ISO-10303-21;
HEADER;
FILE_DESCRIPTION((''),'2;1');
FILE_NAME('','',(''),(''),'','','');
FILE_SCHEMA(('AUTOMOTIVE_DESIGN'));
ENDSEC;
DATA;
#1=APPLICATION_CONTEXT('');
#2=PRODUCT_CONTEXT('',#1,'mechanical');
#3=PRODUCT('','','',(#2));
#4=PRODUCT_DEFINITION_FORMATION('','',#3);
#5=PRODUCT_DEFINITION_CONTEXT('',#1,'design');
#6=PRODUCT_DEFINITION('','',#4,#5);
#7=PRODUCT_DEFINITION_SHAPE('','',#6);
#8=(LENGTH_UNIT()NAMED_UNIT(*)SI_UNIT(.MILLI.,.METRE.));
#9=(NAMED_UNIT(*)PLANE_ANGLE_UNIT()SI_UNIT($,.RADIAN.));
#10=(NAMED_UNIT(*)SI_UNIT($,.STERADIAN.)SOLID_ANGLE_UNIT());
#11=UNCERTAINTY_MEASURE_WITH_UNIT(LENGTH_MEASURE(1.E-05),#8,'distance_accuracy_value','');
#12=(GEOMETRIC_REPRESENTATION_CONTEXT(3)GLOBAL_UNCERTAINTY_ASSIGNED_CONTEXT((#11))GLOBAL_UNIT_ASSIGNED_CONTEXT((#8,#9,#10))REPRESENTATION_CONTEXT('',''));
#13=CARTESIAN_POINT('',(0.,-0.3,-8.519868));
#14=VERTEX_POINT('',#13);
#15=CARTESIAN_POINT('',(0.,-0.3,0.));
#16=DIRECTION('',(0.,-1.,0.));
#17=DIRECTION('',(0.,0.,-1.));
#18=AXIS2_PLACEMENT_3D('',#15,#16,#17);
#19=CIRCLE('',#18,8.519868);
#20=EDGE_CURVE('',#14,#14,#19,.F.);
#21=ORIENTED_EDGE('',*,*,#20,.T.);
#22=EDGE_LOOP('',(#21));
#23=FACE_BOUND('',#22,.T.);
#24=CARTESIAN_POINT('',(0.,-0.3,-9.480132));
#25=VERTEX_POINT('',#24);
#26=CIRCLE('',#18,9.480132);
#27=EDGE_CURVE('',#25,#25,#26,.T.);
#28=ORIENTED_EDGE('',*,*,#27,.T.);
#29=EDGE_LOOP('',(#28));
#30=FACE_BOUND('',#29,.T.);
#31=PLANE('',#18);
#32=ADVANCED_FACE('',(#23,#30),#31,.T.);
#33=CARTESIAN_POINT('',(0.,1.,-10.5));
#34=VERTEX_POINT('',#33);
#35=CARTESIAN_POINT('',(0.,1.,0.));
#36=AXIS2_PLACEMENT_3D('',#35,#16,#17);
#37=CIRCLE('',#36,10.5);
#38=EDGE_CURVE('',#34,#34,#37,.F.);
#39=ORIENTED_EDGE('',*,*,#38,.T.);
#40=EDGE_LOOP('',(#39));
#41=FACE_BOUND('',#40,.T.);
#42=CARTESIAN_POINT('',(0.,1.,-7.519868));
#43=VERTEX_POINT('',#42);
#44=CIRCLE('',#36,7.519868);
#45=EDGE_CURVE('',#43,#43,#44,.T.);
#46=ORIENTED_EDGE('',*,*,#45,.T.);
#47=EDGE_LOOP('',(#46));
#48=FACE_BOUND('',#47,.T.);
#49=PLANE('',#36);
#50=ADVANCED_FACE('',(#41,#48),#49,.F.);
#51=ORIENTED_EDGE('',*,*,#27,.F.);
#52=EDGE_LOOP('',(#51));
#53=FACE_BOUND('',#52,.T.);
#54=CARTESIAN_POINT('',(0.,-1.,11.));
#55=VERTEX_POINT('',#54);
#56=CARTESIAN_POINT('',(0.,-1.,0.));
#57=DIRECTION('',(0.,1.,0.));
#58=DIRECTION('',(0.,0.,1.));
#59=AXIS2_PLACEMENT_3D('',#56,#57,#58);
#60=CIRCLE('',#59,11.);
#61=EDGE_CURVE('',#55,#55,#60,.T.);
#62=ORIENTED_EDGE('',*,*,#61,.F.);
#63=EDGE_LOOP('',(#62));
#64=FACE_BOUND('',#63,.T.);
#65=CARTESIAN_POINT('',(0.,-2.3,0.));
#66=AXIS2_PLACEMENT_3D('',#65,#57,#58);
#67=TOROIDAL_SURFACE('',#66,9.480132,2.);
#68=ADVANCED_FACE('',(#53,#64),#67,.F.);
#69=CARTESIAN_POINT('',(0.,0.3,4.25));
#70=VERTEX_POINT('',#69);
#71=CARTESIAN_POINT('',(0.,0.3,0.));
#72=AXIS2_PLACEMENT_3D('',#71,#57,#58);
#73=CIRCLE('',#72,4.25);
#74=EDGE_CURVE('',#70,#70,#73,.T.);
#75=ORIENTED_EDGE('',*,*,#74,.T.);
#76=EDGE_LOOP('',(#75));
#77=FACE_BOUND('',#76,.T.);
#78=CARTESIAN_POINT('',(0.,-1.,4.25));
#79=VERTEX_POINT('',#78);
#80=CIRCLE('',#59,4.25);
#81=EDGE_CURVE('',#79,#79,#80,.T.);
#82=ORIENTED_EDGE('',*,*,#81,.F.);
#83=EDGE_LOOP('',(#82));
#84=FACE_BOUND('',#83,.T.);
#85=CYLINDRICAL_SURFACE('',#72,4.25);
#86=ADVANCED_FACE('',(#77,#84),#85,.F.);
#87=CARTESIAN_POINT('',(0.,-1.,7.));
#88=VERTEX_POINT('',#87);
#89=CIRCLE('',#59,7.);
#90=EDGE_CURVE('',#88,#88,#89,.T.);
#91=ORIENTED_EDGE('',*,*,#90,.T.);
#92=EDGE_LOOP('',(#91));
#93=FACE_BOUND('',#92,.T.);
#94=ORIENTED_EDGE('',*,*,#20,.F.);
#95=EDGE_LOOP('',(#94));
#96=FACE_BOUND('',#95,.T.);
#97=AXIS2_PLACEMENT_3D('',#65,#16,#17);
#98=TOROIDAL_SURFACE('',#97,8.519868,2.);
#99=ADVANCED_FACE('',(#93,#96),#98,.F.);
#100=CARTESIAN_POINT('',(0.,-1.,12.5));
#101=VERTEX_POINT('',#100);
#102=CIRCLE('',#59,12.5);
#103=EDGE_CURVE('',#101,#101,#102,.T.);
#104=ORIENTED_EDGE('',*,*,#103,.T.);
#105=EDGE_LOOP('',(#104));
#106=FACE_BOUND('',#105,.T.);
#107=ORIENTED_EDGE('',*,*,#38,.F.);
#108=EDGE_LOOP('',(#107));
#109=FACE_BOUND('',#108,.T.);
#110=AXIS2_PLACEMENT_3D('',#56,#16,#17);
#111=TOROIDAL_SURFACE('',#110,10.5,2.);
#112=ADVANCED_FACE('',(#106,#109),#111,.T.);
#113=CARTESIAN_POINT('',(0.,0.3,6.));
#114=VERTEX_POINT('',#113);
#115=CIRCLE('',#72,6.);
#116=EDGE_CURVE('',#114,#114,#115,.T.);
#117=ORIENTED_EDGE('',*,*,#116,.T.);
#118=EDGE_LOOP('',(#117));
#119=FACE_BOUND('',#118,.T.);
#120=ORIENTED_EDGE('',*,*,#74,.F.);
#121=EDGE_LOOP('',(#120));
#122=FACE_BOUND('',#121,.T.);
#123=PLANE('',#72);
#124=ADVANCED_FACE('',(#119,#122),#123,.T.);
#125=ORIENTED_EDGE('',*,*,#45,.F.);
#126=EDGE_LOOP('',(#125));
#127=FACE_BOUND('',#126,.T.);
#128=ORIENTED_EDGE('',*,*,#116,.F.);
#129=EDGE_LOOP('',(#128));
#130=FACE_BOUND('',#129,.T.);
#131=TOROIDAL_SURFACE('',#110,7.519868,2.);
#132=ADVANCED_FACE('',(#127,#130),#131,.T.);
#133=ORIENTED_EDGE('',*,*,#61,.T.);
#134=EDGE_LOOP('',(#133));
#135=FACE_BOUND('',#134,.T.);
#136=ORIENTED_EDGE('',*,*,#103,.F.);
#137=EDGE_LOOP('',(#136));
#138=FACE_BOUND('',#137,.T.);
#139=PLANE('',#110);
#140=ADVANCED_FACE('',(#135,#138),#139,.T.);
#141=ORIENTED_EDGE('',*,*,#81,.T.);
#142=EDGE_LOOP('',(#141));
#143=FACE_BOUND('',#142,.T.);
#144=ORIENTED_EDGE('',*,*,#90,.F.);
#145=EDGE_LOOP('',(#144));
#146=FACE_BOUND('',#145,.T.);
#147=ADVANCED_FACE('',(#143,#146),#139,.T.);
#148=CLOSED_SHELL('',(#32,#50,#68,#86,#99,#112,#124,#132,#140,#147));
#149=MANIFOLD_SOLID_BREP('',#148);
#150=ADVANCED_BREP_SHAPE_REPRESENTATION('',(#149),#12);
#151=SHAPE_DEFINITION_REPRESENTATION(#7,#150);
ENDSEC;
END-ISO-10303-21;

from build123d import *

# Parameters (mm, degrees)
FILLET1_R = 2


with BuildPart() as part:
    # Sketch1 → Revolve1 (revolve)
    with BuildSketch(Plane.XY, mode=Mode.PRIVATE) as revolve1_sk:
        Polygon((-12.5, 1), (-12.5, -1), (-11, -1), (-11, -0.3), (-7, -0.3), (-7, -1), (-4.25, -1), (-4.25, 0.3), (-6, 0.3), (-6, 1), align=None)
    revolve(revolve1_sk.sketch.rotate(Axis((0, 0.3, 0), (0, -1, 0)), 270), axis=Axis((0, 0.3, 0), (0, -1, 0)))

    # Fillet1
    # the kernel refuses this fillet: 2 mm, written as the material it adds along each edge
    with BuildSketch(Plane(origin=(0, -0.3, 0), x_dir=(0, 0, 1), z_dir=(1, 0, 0))) as fillet1_piece_1:
        with BuildLine():
            CenterArc((8.519868415, 2), FILLET1_R, 220.541601874, 49.458398126)
            Line((7, 0.7), (6.969602632, 0.674))
            ThreePointArc((6.969602632, 0.674), (6.96, 0.35), (6.96, 0))
            Line((6.96, 0), (7, -0.04))
            Line((7, -0.04), (8.519868415, -0.04))
            Line((8.519868415, -0.04), (8.519868415, 0))
        make_face()
    revolve(axis=Axis((0, -0.3, 0), (0, -1, 0)))
    with BuildSketch(Plane(origin=(0, -0.3, 0), x_dir=(0, 0, 1), z_dir=(1, 0, 0))) as fillet1_piece_2:
        with BuildLine():
            CenterArc((9.480131585, 2), FILLET1_R, 270, 49.458398126)
            Line((9.480131585, 0), (9.480131585, -0.04))
            Line((9.480131585, -0.04), (11, -0.04))
            Line((11, -0.04), (11.04, 0))
            ThreePointArc((11.04, 0), (11.04, 0.35), (11.030397368, 0.674))
            Line((11.030397368, 0.674), (11, 0.7))
        make_face()
    revolve(axis=Axis((0, -0.3, 0), (0, -1, 0)))
    # the kernel refuses this fillet: 2 mm, written as the material it takes off along each edge
    with BuildSketch(Plane(origin=(0, 1, 0), x_dir=(0, 0, 1), z_dir=(1, 0, 0))) as fillet1_2_piece_1:
        with BuildLine():
            CenterArc((12.5 - FILLET1_R, FILLET1_R), FILLET1_R, 270, 90)
            Line((12.5 - FILLET1_R, 0), (12.5 - FILLET1_R, -FILLET1_R * 0.02))
            Line((12.5 - FILLET1_R, -FILLET1_R * 0.02), (12.5 + FILLET1_R * 0.02, -FILLET1_R * 0.02))
            Line((12.5 + FILLET1_R * 0.02, -FILLET1_R * 0.02), (12.5 + FILLET1_R * 0.02, FILLET1_R))
            Line((12.5 + FILLET1_R * 0.02, FILLET1_R), (12.5, FILLET1_R))
        make_face()
    revolve(axis=Axis((0, 1, 0), (0, -1, 0)), mode=Mode.SUBTRACT)
    with BuildSketch(Plane(origin=(0, 1, 0), x_dir=(0, 0, 1), z_dir=(1, 0, 0))) as fillet1_2_piece_2:
        with BuildLine():
            CenterArc((7.519868415, 2), FILLET1_R, 220.541601874, 49.458398126)
            Line((6, 0.7), (5.969602632, 0.674))
            ThreePointArc((5.969602632, 0.674), (5.96, 0.35), (5.96, 0))
            Line((5.96, 0), (6, -0.04))
            Line((6, -0.04), (7.519868415, -0.04))
            Line((7.519868415, -0.04), (7.519868415, 0))
        make_face()
    revolve(axis=Axis((0, 1, 0), (0, -1, 0)), mode=Mode.SUBTRACT)


solid = part.part
